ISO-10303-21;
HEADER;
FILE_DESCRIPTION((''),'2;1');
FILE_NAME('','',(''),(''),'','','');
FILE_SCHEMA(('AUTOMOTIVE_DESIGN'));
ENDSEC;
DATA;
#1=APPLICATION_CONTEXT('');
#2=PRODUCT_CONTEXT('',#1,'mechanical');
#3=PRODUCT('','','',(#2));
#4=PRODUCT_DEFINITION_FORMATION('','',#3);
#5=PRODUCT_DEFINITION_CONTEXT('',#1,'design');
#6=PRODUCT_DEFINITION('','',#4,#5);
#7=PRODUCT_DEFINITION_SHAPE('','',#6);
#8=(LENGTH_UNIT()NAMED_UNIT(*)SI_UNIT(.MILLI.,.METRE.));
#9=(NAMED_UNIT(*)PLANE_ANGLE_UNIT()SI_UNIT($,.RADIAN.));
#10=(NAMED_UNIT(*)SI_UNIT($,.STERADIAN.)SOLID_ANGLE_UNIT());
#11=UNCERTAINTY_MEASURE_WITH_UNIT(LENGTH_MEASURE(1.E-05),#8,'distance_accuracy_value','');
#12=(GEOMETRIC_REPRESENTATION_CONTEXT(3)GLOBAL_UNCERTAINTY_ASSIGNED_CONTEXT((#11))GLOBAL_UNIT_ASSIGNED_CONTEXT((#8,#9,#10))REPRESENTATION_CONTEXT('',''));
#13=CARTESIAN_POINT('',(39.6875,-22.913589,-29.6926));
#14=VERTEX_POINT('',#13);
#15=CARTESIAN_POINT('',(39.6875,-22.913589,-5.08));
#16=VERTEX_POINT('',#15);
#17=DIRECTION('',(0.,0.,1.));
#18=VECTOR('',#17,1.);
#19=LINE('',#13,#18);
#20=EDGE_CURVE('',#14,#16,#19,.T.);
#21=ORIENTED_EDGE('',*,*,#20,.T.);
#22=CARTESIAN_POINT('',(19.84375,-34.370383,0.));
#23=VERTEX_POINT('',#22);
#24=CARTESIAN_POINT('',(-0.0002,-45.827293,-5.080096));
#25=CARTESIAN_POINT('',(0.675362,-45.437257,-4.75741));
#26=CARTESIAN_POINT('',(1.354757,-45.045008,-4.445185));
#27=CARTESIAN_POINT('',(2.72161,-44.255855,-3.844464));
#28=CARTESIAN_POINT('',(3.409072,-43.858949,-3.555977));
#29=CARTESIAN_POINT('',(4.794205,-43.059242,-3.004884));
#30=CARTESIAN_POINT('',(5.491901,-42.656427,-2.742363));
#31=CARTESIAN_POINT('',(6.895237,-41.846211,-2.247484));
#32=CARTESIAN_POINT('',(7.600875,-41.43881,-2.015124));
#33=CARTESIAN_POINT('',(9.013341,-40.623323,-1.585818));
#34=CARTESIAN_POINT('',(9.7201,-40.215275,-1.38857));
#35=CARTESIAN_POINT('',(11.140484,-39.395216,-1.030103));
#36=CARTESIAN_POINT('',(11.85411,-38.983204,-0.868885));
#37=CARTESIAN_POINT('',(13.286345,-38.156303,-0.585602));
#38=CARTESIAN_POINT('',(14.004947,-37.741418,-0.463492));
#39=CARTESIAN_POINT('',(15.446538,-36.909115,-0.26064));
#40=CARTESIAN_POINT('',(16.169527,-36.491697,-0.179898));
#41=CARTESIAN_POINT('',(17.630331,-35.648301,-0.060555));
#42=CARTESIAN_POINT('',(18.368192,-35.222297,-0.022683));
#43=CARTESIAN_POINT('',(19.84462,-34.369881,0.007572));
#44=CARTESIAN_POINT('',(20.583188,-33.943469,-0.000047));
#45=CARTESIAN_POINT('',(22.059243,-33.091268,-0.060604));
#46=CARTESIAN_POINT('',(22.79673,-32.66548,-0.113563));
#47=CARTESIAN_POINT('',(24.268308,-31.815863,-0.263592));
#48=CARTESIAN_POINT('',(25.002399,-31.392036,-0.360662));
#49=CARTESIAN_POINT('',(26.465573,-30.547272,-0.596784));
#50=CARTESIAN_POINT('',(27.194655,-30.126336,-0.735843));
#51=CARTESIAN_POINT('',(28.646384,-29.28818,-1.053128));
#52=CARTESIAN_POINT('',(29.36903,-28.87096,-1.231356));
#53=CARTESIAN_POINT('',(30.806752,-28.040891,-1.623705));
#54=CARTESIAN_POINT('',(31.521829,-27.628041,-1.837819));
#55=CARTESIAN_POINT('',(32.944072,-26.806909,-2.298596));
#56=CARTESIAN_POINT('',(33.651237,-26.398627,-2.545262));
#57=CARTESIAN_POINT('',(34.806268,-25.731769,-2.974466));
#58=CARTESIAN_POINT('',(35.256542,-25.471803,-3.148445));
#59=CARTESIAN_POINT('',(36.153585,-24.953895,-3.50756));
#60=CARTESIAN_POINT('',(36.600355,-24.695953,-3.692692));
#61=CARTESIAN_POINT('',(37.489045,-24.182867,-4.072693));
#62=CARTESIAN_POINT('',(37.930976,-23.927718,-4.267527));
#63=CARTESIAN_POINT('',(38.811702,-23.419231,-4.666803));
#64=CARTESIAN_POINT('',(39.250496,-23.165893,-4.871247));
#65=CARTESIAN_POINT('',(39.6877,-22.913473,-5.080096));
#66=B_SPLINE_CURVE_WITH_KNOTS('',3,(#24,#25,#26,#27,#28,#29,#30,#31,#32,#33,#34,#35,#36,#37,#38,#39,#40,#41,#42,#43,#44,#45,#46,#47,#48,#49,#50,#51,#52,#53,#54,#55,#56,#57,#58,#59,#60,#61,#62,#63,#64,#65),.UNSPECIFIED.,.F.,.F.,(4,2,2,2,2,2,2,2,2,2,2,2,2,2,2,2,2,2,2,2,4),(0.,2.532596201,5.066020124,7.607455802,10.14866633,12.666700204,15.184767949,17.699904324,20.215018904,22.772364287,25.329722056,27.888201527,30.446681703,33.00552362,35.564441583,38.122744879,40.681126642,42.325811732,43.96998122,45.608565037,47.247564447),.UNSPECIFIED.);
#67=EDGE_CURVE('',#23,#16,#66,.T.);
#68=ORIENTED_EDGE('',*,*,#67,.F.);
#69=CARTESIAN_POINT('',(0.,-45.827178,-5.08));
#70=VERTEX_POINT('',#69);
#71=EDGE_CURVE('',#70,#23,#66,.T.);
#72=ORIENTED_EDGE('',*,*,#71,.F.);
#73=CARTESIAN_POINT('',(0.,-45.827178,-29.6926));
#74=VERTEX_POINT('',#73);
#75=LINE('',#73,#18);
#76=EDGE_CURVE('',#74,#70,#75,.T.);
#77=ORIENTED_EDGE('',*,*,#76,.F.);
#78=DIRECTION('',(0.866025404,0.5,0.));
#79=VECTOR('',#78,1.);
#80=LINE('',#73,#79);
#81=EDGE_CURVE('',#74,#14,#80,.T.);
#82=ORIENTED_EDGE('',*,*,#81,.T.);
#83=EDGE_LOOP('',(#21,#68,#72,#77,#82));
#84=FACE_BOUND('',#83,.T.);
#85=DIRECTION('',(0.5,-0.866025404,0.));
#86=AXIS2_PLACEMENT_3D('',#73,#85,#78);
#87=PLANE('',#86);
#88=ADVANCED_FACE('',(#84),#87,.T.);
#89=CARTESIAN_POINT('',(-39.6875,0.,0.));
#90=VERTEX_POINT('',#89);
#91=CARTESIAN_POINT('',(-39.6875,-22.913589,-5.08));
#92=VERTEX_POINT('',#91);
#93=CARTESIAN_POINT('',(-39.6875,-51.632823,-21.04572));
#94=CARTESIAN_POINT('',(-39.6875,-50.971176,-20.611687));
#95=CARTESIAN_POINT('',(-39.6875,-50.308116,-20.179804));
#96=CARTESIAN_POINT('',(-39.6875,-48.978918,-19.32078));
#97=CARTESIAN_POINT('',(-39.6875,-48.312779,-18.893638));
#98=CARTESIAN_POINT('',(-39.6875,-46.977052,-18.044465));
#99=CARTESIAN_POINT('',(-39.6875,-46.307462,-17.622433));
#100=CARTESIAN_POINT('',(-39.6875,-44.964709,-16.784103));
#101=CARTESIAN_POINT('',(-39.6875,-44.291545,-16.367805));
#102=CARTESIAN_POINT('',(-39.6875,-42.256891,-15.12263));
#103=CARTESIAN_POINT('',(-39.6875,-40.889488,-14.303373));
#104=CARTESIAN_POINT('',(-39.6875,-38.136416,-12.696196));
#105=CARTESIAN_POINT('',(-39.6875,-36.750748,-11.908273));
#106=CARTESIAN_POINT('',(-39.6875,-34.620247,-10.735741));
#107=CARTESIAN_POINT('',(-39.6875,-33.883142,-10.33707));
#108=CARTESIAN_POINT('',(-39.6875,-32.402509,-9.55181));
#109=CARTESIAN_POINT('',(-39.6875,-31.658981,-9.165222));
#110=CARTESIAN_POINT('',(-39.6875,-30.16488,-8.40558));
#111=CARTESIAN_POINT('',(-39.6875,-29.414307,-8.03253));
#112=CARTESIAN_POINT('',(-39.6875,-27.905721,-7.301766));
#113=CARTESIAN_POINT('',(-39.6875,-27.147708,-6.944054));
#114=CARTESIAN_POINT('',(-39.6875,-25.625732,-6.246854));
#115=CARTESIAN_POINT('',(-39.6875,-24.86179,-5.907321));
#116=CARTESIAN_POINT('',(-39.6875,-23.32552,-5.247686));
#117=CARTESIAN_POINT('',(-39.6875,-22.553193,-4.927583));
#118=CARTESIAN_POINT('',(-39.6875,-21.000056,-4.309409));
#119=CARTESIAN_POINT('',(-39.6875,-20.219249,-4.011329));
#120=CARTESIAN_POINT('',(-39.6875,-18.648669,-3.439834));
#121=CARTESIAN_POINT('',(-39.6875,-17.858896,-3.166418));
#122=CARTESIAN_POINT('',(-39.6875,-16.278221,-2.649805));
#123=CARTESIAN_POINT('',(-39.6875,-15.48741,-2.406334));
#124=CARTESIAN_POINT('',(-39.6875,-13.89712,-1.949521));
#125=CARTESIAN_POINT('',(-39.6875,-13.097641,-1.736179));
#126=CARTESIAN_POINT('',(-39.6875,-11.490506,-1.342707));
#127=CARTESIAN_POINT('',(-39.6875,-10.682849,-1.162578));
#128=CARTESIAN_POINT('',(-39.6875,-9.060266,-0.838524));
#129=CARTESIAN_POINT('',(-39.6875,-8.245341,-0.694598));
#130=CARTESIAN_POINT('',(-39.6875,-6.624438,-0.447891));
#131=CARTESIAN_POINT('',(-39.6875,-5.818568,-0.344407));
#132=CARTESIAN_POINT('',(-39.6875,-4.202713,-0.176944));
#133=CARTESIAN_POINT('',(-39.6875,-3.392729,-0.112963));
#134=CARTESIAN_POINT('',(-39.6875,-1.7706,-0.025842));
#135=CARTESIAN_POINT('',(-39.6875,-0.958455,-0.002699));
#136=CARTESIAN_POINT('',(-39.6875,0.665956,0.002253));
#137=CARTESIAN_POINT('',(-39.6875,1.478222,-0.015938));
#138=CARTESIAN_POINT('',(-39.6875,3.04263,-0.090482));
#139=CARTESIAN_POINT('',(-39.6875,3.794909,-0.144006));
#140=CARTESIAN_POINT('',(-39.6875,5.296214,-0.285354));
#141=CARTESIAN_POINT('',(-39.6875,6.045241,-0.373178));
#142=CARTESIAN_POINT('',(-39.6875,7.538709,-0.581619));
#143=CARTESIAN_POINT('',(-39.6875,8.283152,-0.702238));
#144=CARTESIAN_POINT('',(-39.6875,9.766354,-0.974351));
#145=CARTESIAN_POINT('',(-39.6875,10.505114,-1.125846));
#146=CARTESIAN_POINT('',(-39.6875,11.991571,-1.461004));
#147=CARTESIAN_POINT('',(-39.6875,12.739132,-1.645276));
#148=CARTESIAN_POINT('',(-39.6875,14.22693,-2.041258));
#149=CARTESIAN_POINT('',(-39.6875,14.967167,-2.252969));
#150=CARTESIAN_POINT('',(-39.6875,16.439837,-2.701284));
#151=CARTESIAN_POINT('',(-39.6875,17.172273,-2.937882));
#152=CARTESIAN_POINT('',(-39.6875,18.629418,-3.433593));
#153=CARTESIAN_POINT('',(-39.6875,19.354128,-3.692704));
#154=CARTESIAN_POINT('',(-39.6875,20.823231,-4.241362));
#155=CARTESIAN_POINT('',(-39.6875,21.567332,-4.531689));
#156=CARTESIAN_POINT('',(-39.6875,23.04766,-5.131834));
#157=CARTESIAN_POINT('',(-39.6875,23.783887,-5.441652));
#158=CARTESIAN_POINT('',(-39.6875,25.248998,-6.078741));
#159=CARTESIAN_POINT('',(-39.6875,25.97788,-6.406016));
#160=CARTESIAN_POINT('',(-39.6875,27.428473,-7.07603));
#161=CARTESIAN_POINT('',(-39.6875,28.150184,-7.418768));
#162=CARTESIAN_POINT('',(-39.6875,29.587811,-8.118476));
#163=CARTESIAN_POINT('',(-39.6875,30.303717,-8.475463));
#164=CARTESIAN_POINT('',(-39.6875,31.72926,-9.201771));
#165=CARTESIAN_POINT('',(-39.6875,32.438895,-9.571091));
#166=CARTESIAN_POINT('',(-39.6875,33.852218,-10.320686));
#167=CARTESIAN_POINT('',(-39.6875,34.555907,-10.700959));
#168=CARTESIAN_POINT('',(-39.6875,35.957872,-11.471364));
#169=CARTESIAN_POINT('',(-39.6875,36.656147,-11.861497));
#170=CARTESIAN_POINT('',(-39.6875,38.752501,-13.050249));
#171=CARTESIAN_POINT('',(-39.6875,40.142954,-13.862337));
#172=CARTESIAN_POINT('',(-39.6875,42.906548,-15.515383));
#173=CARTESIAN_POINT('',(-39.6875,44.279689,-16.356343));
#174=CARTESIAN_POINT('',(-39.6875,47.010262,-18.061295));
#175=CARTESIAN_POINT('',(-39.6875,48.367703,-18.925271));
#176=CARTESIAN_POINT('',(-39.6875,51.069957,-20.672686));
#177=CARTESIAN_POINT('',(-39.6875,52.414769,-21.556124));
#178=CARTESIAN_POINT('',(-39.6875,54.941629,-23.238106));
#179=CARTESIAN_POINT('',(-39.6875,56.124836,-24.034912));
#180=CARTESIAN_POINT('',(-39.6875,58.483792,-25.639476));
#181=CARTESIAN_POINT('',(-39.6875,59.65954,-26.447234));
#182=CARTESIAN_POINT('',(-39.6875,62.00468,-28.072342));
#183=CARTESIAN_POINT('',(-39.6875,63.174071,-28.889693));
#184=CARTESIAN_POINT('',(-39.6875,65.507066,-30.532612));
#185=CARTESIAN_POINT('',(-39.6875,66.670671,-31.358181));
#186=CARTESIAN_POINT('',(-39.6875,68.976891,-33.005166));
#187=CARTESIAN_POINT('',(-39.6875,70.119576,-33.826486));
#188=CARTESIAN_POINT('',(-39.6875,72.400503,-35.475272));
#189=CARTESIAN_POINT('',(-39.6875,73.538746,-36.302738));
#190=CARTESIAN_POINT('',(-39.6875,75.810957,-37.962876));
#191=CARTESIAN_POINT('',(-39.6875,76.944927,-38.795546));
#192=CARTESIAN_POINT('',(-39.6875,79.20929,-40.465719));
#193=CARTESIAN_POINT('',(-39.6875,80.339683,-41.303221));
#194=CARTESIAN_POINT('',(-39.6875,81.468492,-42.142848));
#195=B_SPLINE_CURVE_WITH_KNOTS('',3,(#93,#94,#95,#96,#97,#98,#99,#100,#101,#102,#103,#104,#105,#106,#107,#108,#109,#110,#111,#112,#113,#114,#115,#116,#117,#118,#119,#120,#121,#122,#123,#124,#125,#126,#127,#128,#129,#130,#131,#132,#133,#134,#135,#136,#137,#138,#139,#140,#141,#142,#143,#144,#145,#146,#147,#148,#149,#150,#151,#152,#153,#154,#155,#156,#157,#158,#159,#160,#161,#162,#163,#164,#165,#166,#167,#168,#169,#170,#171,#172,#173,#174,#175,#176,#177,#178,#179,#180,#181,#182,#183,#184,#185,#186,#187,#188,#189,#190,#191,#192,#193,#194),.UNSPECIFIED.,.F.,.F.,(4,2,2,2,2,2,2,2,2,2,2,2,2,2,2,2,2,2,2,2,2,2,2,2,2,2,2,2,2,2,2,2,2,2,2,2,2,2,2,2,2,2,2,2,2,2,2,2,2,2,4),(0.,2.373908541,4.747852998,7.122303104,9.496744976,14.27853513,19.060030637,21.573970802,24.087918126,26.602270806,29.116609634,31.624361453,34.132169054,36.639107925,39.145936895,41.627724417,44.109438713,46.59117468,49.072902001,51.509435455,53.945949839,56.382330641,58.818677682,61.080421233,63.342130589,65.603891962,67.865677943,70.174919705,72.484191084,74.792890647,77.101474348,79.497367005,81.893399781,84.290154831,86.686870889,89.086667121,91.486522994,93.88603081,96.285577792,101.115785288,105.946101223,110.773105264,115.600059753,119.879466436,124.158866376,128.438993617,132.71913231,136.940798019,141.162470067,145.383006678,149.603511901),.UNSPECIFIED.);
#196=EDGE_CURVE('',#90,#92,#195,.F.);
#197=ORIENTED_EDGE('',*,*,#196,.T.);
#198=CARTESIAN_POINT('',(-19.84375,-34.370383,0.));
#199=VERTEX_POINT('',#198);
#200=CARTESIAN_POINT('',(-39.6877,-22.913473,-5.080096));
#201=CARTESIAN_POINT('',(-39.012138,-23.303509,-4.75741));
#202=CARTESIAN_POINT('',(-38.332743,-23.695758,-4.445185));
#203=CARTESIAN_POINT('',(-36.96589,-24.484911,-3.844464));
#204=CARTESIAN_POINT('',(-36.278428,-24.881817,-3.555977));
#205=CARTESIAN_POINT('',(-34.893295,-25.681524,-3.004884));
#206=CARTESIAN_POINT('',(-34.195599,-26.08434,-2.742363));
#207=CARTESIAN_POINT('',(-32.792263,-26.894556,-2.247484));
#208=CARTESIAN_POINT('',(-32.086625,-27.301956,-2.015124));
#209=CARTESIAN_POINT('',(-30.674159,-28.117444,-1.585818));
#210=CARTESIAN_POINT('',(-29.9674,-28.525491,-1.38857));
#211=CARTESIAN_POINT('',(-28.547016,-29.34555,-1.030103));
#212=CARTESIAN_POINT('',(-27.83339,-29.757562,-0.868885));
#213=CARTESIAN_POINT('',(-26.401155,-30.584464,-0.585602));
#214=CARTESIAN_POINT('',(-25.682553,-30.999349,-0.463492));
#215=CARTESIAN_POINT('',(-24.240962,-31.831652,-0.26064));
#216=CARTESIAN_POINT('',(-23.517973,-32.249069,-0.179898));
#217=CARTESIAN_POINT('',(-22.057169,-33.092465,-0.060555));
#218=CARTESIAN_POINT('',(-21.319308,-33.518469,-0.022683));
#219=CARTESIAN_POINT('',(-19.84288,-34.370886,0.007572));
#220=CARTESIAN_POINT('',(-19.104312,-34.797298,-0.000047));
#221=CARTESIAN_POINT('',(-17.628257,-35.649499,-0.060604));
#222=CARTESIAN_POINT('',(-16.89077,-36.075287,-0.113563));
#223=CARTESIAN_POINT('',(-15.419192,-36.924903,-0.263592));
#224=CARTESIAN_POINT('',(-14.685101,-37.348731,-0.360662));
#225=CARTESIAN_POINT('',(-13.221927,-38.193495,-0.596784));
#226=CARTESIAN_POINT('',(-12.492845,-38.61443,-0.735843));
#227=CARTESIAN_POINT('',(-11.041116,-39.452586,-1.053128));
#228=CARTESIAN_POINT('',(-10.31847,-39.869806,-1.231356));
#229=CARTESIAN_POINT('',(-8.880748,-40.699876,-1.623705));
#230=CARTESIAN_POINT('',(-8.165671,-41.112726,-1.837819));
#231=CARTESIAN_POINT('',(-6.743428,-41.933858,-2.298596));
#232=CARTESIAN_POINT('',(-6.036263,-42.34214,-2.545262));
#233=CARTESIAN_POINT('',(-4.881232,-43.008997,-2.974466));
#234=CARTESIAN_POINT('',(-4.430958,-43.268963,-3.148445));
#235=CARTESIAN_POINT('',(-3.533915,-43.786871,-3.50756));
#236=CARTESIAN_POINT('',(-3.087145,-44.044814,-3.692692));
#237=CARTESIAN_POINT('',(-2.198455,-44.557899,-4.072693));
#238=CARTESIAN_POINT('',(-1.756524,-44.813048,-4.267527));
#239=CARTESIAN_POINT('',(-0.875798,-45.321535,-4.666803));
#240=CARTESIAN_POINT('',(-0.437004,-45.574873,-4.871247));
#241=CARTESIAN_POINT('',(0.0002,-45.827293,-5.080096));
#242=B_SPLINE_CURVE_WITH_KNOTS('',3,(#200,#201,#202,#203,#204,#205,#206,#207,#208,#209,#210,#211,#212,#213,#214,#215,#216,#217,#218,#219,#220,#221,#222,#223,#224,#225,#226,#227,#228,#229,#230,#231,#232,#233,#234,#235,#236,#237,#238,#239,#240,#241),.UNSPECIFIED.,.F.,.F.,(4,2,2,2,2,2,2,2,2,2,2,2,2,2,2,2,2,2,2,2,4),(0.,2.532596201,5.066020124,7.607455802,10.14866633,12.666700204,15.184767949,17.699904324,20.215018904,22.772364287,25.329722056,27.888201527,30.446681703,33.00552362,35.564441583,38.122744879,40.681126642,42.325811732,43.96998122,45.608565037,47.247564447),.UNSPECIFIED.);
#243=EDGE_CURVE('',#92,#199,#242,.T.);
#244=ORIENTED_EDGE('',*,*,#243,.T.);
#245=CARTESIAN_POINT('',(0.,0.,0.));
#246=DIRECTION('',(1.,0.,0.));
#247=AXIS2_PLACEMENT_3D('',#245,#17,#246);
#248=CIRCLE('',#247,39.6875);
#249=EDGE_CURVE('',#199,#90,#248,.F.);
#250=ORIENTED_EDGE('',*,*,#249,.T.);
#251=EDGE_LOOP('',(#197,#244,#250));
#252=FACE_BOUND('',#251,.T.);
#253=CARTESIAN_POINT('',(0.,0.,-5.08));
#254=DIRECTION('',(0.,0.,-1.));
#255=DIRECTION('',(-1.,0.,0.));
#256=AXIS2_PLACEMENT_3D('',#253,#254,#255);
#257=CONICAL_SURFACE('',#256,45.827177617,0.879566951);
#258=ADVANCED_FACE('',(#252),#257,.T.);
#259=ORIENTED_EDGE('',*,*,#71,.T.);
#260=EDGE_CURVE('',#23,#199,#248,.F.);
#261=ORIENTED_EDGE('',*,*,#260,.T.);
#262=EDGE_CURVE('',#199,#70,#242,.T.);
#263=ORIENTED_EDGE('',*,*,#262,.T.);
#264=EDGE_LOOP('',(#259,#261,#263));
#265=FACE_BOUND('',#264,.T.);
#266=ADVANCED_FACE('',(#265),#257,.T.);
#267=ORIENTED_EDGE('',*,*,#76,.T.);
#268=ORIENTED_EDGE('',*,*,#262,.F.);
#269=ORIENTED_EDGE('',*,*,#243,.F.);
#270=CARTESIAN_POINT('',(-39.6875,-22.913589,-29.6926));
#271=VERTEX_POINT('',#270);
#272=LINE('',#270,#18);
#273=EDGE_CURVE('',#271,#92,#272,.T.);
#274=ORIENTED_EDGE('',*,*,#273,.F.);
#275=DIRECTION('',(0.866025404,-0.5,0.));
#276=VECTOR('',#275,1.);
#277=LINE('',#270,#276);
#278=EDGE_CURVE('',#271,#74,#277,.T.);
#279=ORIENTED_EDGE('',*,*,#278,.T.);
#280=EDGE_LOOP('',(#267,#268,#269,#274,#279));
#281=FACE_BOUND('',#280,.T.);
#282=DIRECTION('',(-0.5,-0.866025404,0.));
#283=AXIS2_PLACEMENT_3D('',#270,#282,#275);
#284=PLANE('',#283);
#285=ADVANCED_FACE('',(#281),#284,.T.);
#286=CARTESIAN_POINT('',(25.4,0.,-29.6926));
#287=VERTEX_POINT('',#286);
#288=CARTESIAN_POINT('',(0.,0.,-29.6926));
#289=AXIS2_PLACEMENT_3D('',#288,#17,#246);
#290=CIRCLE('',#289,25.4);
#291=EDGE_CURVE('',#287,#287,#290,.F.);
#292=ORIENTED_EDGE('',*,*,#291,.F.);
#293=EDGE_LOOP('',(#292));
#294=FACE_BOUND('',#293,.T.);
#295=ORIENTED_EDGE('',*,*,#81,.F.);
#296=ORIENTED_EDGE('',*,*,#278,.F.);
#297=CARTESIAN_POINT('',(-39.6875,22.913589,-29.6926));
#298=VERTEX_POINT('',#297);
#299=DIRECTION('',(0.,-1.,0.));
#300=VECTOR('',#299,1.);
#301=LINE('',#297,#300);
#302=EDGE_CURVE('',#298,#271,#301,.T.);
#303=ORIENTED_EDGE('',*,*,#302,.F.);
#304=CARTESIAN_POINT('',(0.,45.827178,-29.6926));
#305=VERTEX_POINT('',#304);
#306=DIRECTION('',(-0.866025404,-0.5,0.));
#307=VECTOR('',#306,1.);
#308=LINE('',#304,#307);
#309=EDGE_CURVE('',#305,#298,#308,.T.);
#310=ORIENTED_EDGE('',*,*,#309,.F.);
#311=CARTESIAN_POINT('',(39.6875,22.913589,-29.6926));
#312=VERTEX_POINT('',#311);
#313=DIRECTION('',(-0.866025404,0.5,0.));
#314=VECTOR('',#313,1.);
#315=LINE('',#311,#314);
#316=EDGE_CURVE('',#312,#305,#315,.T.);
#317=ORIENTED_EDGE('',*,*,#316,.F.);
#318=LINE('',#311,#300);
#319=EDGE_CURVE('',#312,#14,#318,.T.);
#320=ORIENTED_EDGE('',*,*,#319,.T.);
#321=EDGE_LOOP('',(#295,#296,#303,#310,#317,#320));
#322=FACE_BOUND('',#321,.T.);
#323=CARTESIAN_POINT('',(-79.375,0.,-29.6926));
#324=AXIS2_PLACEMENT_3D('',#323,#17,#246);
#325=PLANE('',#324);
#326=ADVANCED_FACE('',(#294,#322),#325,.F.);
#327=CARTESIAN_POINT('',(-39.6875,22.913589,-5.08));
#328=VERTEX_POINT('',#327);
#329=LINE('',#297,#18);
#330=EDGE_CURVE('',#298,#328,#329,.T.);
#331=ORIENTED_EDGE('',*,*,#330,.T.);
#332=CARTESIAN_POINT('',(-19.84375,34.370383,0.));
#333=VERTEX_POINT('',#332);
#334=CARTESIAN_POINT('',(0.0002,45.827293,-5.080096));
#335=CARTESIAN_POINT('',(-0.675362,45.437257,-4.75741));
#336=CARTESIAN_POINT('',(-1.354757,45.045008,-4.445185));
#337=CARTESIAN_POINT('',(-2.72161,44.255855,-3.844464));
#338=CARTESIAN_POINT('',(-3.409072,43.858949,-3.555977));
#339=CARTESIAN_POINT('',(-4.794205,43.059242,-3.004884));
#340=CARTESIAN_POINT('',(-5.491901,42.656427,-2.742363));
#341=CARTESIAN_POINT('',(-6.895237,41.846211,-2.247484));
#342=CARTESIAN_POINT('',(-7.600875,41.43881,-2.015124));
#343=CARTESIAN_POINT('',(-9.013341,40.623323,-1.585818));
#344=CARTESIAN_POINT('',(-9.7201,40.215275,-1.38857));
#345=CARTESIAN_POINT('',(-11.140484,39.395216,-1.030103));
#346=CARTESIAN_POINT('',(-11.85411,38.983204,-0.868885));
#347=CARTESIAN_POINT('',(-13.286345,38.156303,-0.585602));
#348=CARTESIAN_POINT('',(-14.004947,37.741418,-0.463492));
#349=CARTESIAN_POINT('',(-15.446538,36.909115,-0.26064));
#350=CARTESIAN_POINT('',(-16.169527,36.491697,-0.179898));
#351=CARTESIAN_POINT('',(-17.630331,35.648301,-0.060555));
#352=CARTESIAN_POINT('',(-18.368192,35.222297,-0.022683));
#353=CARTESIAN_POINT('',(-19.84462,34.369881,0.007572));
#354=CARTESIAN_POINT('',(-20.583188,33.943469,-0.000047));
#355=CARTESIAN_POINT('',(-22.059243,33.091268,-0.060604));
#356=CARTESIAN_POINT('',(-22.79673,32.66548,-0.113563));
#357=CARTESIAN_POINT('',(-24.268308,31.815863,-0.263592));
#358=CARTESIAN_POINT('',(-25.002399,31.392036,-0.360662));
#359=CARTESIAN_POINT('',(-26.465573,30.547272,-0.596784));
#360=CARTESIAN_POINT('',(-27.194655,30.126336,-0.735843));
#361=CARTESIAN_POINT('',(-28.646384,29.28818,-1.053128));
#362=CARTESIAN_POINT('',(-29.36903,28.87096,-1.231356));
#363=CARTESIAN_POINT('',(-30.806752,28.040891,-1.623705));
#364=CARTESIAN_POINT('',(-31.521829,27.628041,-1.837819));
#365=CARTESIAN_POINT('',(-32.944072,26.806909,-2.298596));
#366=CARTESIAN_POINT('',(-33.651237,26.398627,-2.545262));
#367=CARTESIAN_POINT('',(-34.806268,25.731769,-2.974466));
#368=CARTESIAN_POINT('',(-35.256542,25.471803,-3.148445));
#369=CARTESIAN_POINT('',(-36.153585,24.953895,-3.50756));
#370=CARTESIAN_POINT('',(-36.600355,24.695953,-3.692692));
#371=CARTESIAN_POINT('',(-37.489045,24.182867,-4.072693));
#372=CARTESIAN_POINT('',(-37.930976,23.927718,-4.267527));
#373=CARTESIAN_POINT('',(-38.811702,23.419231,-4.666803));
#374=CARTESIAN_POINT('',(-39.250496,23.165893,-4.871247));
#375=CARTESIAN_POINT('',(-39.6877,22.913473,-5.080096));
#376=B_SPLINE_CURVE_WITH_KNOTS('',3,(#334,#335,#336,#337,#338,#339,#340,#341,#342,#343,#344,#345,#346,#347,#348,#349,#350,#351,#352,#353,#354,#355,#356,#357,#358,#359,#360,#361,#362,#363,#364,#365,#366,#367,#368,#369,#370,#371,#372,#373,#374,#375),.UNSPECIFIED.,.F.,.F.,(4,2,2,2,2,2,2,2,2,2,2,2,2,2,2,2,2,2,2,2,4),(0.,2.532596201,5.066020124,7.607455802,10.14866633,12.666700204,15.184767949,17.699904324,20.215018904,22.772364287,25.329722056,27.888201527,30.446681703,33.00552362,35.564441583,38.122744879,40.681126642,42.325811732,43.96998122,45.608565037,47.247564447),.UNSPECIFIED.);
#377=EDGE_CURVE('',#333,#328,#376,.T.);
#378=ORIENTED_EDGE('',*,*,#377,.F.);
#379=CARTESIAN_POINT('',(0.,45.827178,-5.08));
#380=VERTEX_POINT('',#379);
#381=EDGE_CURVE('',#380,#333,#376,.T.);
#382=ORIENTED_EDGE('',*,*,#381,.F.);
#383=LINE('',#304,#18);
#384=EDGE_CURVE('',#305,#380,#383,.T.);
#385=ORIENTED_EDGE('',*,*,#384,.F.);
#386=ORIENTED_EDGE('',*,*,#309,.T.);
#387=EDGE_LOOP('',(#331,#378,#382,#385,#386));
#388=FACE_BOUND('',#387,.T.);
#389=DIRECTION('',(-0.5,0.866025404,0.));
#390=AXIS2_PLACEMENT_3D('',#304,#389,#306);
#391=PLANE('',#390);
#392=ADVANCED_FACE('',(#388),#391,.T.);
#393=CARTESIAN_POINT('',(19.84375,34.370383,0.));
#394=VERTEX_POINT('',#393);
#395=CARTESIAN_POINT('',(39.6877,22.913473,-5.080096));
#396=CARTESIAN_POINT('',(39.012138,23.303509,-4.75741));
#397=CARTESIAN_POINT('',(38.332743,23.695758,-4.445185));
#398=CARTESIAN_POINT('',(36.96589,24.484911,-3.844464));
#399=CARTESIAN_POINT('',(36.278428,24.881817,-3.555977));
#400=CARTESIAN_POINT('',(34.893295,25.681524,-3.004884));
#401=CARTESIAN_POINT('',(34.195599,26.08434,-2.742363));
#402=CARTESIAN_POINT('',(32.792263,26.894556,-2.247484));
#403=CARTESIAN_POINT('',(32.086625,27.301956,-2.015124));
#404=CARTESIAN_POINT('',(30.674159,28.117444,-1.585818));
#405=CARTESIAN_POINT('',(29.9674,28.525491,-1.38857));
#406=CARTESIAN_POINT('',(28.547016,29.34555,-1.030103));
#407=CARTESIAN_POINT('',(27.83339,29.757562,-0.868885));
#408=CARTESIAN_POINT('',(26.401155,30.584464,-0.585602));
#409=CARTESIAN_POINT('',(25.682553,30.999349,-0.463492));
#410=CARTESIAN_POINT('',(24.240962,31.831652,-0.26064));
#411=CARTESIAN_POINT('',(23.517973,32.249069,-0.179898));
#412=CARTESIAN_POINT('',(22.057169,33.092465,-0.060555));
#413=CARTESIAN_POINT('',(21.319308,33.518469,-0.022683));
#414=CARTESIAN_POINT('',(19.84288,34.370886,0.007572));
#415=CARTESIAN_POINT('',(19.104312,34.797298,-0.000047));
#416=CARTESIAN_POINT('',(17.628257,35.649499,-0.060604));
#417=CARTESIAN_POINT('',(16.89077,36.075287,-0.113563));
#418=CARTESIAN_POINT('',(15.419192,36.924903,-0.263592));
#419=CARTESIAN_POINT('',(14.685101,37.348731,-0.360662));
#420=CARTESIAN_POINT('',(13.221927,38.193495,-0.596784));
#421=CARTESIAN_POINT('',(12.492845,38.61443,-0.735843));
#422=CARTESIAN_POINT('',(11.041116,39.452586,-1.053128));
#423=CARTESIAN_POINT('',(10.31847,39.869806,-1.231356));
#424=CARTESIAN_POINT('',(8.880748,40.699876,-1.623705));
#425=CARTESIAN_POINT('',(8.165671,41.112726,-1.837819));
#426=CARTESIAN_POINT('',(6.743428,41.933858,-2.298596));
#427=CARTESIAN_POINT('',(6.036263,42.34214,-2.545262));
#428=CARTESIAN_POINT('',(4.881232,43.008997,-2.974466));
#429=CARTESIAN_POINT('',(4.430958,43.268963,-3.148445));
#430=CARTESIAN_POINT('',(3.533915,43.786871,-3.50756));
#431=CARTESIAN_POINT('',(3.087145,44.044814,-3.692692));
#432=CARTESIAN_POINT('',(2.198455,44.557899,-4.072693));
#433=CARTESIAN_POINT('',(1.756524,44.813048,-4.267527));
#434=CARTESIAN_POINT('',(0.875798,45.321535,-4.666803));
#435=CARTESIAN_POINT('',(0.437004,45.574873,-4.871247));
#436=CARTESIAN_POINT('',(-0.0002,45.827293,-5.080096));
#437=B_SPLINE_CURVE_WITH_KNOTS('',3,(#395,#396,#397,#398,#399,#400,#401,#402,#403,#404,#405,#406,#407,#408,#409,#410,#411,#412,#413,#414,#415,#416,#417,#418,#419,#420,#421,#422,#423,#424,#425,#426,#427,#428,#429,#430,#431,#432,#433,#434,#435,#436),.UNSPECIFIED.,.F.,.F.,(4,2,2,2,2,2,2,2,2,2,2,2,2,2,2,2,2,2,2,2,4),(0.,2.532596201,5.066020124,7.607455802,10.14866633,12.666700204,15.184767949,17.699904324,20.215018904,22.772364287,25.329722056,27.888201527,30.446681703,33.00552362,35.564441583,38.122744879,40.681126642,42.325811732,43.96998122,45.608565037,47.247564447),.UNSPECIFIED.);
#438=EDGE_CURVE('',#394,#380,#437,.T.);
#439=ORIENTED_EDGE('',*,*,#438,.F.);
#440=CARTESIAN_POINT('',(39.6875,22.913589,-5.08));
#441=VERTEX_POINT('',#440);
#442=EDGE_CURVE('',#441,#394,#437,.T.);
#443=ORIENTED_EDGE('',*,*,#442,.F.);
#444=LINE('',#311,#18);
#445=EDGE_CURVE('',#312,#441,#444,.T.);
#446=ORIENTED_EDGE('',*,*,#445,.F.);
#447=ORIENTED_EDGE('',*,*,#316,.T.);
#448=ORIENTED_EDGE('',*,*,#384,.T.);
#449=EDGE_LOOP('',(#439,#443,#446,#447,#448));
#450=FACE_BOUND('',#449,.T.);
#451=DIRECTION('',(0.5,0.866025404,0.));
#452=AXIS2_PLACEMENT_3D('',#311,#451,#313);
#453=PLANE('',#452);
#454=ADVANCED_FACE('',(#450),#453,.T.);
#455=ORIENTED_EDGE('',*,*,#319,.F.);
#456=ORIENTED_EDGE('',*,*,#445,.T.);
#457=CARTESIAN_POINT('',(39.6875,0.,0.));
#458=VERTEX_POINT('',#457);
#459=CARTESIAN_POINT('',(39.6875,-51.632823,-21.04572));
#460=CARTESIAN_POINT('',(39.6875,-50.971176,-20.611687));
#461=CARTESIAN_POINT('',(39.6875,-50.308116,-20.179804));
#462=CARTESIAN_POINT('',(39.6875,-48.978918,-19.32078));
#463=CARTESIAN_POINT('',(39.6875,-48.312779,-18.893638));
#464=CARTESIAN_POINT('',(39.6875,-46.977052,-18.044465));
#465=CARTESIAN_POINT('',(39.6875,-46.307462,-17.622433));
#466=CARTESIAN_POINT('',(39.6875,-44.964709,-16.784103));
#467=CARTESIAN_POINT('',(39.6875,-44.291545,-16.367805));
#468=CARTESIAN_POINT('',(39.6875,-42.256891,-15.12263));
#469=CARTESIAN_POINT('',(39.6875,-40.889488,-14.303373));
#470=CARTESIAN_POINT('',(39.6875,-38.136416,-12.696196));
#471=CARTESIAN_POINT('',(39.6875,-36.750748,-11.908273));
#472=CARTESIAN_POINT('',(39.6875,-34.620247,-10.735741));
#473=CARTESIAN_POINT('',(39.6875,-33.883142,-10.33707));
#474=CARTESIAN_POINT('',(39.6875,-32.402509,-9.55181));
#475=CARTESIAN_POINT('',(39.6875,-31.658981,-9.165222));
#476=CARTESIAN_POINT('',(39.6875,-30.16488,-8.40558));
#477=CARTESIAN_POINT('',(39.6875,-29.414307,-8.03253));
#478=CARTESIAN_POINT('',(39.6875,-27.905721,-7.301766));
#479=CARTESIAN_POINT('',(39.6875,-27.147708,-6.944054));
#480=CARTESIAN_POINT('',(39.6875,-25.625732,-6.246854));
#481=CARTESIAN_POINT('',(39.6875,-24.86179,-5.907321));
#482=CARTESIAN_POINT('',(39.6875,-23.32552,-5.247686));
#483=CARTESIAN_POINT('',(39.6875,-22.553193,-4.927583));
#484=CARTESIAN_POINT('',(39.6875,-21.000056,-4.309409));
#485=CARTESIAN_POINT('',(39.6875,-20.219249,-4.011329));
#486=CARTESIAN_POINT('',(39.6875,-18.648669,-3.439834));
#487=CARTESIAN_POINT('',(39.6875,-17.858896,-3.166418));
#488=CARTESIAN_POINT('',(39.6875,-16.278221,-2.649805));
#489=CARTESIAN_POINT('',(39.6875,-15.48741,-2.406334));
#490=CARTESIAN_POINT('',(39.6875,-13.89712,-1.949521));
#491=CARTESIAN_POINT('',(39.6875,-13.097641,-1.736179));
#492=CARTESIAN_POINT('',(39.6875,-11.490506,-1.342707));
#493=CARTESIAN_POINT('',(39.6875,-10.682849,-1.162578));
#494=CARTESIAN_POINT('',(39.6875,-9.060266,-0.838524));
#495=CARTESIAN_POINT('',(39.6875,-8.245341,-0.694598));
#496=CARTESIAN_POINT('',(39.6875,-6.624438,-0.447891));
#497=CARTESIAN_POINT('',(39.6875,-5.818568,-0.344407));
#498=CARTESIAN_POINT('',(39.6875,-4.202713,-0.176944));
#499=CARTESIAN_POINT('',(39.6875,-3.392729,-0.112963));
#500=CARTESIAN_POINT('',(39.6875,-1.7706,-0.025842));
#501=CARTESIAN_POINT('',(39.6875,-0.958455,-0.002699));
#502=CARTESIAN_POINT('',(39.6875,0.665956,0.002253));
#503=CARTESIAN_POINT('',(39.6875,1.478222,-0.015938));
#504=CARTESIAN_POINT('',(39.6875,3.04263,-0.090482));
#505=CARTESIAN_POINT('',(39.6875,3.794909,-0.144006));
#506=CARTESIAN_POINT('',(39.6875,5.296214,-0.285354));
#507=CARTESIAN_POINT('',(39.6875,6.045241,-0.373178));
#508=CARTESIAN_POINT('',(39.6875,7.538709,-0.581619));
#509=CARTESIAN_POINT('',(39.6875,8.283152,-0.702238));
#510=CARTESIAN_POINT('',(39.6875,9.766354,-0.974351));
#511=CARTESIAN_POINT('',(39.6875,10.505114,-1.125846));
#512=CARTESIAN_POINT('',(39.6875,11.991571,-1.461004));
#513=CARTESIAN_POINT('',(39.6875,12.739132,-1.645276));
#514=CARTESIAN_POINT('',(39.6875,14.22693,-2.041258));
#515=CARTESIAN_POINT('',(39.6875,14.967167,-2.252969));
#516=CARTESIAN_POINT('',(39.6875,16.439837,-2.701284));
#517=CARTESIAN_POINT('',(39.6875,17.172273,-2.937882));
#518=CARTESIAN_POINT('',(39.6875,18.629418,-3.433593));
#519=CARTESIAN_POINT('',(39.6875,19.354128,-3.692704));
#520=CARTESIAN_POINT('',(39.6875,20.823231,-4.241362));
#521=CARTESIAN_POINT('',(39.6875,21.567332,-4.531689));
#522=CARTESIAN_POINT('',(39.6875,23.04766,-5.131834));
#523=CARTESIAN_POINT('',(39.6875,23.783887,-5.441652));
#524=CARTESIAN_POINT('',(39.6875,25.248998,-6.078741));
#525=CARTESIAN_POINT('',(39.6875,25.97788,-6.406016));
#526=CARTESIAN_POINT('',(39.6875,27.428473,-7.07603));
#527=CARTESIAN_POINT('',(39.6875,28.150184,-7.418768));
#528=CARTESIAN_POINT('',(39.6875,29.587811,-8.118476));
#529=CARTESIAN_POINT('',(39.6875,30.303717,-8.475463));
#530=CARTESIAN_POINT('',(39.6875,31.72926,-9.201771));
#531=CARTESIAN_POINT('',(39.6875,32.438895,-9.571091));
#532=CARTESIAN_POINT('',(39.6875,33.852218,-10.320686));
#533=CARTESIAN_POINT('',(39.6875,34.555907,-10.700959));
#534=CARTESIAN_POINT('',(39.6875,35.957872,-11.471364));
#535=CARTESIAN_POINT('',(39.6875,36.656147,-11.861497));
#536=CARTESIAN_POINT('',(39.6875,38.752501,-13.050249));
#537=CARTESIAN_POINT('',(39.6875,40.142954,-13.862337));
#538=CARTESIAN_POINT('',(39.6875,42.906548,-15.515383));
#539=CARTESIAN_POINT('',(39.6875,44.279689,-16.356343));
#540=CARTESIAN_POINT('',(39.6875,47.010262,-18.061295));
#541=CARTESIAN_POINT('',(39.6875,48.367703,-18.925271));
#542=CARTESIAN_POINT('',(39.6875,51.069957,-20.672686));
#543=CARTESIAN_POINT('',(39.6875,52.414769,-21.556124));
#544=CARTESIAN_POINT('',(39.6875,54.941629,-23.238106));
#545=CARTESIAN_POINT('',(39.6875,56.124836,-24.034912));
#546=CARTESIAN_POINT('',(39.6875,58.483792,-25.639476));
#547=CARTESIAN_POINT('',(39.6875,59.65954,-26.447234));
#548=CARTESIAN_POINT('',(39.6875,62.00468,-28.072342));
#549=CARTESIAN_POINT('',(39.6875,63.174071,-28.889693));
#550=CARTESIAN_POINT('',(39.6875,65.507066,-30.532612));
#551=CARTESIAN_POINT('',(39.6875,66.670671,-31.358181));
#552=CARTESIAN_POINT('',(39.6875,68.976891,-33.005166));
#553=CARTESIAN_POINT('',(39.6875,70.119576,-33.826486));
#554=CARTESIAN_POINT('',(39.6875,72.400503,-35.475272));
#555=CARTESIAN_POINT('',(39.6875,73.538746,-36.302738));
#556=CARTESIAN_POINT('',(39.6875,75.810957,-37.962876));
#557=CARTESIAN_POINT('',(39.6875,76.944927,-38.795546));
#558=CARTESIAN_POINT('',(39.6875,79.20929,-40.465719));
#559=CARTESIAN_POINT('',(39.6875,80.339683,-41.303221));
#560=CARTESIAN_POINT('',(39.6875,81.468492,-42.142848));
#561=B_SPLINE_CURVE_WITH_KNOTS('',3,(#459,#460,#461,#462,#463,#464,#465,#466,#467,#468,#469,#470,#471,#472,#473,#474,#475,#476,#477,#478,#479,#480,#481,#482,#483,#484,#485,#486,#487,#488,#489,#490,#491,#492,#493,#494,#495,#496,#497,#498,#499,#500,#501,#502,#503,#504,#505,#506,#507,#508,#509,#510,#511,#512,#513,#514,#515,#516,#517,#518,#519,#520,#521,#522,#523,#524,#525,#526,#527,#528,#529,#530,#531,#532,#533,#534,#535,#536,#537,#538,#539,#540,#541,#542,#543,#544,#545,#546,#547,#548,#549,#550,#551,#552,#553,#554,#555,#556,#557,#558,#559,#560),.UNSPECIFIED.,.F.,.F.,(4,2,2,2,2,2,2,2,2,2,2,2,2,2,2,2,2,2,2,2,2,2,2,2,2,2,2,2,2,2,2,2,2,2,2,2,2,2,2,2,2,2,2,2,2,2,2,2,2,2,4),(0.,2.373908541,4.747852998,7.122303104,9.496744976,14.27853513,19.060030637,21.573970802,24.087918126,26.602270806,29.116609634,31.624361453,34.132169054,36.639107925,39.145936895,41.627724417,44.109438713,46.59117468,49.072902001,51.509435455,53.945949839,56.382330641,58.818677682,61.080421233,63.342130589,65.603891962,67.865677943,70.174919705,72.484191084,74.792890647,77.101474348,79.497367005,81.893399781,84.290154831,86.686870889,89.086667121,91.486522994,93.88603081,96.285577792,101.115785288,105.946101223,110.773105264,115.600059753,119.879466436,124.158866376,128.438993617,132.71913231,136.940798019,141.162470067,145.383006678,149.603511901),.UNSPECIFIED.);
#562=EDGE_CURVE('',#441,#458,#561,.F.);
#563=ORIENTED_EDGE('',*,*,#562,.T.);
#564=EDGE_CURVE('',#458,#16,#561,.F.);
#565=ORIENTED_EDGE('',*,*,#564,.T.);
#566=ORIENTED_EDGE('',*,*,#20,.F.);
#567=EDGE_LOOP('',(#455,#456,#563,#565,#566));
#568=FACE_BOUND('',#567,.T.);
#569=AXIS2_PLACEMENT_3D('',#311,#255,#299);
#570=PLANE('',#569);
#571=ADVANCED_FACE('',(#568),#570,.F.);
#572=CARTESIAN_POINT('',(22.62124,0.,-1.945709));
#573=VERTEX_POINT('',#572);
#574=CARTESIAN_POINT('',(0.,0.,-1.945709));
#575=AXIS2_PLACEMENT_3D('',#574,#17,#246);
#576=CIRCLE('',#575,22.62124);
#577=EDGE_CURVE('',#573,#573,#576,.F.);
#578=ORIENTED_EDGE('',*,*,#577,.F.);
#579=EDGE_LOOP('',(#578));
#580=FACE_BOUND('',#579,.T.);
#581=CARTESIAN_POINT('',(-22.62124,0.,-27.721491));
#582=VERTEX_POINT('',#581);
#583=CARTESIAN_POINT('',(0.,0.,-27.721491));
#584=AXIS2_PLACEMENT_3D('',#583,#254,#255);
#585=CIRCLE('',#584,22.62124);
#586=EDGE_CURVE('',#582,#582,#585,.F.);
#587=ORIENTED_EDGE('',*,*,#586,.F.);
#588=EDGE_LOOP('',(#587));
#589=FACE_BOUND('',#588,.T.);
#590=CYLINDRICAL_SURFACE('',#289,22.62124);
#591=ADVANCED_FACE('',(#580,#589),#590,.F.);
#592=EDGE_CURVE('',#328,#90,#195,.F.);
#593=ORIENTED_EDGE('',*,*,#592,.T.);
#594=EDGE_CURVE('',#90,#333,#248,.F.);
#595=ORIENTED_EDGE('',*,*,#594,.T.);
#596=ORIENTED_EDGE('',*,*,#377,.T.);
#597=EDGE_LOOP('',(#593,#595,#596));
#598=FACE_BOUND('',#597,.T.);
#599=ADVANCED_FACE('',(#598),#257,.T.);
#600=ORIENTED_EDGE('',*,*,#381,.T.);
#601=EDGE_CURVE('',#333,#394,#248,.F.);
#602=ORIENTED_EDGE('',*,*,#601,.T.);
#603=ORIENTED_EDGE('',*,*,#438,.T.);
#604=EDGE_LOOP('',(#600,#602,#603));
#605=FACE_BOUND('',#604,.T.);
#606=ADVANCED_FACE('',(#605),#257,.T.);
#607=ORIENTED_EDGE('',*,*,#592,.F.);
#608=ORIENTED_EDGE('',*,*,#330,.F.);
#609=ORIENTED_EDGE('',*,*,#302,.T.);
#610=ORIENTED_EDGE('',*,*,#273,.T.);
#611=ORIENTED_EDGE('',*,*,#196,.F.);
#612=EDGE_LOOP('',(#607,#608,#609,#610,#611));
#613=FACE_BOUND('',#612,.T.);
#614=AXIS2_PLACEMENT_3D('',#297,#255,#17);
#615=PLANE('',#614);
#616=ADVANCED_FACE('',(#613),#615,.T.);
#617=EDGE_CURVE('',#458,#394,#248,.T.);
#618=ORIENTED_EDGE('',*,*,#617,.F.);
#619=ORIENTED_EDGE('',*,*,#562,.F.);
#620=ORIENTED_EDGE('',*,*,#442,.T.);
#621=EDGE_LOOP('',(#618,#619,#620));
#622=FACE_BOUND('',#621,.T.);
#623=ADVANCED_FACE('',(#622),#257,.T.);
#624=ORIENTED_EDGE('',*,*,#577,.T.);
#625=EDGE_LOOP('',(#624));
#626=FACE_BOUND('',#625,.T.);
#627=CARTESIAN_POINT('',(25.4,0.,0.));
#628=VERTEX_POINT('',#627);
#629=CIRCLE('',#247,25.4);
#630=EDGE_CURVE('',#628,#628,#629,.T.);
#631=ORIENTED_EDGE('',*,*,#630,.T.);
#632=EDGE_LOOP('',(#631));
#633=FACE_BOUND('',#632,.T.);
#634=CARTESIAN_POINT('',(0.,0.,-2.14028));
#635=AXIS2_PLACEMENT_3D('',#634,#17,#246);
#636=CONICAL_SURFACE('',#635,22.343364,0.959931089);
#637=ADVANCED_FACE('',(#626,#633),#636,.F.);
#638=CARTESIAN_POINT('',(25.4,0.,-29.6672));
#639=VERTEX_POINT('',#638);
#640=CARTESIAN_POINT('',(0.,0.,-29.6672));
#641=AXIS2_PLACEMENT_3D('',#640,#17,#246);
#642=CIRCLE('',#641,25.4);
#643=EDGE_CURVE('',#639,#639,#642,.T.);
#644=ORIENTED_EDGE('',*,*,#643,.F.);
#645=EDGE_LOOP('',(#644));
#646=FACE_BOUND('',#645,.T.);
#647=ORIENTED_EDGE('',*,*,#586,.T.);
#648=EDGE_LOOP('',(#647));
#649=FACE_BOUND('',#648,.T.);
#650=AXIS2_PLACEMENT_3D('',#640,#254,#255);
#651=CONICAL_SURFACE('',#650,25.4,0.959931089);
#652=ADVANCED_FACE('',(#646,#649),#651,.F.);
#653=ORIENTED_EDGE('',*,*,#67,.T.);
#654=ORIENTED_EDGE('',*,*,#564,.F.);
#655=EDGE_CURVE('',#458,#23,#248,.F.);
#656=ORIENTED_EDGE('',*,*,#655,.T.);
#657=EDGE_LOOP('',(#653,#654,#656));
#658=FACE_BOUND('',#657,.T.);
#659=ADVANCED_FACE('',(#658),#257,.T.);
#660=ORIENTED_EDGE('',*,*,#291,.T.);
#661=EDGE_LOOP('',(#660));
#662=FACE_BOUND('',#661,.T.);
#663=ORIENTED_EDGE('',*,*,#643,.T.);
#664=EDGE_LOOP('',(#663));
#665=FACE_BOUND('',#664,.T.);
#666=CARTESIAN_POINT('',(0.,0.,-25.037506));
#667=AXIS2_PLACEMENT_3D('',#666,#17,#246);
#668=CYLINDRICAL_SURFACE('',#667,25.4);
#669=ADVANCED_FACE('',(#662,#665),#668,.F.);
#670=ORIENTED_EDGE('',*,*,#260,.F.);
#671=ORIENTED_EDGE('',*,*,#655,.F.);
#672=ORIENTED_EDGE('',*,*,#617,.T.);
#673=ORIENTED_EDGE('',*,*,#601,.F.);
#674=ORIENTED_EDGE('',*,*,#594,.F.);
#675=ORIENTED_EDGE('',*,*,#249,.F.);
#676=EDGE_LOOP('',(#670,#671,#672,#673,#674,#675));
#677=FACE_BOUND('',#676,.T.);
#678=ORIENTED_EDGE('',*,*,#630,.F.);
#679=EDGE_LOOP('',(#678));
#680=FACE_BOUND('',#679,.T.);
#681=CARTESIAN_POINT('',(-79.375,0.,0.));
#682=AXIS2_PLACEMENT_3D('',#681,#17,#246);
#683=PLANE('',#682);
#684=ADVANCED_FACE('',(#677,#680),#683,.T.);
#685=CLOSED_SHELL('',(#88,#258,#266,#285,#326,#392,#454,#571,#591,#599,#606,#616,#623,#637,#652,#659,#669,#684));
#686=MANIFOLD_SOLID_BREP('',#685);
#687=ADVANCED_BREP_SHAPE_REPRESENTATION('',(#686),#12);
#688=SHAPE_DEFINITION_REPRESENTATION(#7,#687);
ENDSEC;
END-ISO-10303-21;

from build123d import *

# Parameters (mm, degrees)
THREADSCHEMATIC_START     = -29.6926
THREADSCHEMATIC_OUTLINE_R = 22.62124
THREADSCHEMATIC_DEPTH     = 29.6926


# Read off the part's stored shape, not the designer's step: ThreadSchematic
with BuildPart() as part:
    # ThreadSchematic outline → ThreadSchematic (new body)
    with BuildSketch(Plane.XY.offset(THREADSCHEMATIC_START)):
        Polygon((39.6875, 22.913588808), (0, 45.827177617), (-39.6875, 22.913588808), (-39.6875, -22.913588808), (0, -45.827177617), (39.6875, -22.913588808), align=None)
        Circle(THREADSCHEMATIC_OUTLINE_R, mode=Mode.SUBTRACT)
    extrude(amount=THREADSCHEMATIC_DEPTH)

    # Sketch2 → Single-Chamfer (revolve, cut)
    with BuildSketch(Plane(origin=(0, 0, 0), x_dir=(0, 0, -1), z_dir=(1, 0, 0))):
        Polygon((0, 39.6875), (-12.7, 39.6875), (-12.7, 58.527177617), (5.08, 58.527177617), (5.08, 45.827177617), align=None)
    revolve(axis=Axis((0, 0, 0), (0, 0, -1)), mode=Mode.SUBTRACT)

    # Sketch3 → EndChamfer (revolve, cut)
    with BuildSketch(Plane(origin=(0, 0, 0), x_dir=(0, 0, -1), z_dir=(1, 0, 0)), mode=Mode.PRIVATE) as endchamfer_sk:
        Polygon((29.6672, 25.4), (27.526920431, 22.343364), (29.718, 22.343364), (29.718, 25.4), align=None)
        Polygon((-0.0508, 25.4), (0, 25.4), (2.140279569, 22.343364), (-0.0508, 22.343364), align=None)
    revolve(endchamfer_sk.sketch.rotate(Axis((0, 0, -25.037505729), (0, 0, -1)), 90), axis=Axis((0, 0, -25.037505729), (0, 0, -1)), mode=Mode.SUBTRACT)


solid = part.part
